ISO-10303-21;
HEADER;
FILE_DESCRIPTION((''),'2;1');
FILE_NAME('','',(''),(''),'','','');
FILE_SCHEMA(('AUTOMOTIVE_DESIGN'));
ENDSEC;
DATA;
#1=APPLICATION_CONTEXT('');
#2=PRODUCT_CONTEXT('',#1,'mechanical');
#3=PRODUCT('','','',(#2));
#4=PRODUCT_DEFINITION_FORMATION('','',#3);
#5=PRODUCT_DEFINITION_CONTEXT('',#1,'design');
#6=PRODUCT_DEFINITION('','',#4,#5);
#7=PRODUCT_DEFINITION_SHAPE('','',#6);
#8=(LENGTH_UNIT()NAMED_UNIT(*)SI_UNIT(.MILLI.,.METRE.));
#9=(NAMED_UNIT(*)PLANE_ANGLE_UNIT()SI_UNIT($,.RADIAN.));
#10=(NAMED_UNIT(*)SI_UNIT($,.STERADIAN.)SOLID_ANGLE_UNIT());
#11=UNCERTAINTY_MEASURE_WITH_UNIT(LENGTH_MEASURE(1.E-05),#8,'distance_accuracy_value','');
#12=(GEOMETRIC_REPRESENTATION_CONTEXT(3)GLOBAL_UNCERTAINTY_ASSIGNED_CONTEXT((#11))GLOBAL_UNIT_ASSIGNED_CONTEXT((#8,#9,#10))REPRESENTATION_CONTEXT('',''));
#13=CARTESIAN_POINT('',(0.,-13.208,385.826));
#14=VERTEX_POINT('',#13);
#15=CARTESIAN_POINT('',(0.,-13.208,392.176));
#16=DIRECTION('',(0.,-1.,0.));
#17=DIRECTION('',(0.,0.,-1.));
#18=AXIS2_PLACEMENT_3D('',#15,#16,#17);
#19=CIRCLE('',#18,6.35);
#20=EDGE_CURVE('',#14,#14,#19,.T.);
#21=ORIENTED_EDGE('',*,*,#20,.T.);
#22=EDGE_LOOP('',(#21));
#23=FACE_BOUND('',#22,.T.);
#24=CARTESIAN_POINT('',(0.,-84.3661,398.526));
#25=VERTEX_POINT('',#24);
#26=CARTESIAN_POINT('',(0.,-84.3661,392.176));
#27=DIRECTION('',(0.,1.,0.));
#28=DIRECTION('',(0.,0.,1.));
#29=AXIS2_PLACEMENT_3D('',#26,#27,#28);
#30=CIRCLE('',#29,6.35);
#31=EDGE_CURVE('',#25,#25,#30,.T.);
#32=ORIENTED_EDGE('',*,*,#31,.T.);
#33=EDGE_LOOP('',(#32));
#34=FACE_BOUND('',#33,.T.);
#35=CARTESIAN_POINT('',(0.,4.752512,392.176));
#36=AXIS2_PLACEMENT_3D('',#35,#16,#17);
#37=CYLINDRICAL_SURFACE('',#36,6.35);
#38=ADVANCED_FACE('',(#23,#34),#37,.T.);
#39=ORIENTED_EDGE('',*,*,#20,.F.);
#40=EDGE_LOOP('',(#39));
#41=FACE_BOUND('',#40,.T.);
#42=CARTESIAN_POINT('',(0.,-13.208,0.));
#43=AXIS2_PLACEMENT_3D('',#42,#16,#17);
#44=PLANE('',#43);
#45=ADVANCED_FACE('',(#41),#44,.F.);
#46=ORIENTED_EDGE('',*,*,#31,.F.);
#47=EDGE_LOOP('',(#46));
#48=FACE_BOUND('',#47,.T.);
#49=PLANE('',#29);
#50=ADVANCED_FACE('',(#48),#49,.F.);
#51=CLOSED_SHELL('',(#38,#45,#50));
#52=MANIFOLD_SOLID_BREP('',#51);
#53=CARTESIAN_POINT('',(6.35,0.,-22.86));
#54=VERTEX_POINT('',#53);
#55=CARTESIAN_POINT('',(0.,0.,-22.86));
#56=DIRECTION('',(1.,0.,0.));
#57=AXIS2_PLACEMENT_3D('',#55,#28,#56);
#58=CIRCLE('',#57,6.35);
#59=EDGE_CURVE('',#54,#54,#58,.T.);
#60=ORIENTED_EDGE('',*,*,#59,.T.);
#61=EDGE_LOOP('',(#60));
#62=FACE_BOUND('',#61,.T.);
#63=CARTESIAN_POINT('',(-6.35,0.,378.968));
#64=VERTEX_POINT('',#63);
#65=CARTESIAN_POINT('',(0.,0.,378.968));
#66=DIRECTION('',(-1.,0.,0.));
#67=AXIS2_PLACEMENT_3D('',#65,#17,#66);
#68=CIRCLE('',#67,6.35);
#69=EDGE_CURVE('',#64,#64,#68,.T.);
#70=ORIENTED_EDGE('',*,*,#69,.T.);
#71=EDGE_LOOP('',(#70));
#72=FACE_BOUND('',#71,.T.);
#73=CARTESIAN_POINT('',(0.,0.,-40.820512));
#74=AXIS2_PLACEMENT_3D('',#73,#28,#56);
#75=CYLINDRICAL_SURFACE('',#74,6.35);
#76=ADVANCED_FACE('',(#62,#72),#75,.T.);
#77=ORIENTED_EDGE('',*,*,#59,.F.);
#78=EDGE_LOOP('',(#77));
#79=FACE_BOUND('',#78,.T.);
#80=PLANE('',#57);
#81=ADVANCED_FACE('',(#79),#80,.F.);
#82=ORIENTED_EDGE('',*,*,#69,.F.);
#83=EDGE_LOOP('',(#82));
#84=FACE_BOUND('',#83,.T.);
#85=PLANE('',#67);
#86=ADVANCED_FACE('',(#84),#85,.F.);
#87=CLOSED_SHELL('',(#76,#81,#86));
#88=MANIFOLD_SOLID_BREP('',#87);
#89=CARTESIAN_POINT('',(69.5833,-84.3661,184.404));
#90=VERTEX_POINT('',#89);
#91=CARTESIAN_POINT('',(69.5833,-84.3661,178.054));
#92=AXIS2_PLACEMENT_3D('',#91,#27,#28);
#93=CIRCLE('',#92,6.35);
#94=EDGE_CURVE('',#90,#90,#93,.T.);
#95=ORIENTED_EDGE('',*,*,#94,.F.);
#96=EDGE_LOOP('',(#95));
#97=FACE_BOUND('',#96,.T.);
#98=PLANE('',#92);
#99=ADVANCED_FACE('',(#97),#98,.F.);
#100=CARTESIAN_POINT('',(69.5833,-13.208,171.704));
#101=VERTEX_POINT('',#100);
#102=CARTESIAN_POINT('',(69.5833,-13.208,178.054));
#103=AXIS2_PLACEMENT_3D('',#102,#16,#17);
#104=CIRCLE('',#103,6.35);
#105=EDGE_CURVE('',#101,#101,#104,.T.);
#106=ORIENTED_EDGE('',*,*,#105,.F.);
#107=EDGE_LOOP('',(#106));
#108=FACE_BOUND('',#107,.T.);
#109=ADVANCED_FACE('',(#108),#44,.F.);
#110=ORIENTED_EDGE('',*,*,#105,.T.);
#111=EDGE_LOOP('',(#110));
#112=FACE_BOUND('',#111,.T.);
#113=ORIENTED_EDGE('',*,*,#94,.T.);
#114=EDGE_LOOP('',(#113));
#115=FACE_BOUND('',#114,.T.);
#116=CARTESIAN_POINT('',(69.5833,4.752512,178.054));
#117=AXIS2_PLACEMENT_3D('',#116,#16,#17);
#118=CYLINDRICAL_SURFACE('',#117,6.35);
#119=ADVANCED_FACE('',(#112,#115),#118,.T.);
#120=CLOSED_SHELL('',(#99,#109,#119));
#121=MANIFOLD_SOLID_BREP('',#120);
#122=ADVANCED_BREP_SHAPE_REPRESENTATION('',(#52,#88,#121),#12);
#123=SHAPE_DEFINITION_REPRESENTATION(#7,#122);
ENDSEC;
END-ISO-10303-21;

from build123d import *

# Parameters (mm, degrees)
BOSS_EXTRUDE1_OUTLINE_R = 6.35
BOSS_EXTRUDE1_DEPTH     = 71.1581
SKETCH3_R               = 6.35
BOSS_EXTRUDE2_DEPTH     = 401.828


# Read off the part's stored shape, not the designer's step: Boss-Extrude1
with BuildPart() as part:
    # Boss-Extrude1 outline → Boss-Extrude1 (new body)
    with BuildSketch(Plane(origin=(0, -84.3661, 0), x_dir=(1, 0, 0), z_dir=(0, 1, 0))):
        with Locations((0, -392.176)):
            Circle(BOSS_EXTRUDE1_OUTLINE_R)
        with Locations((69.5833, -178.054)):
            Circle(BOSS_EXTRUDE1_OUTLINE_R)
    extrude(amount=BOSS_EXTRUDE1_DEPTH)


with BuildPart() as body_2:
    # Sketch3 → Boss-Extrude2 (new body)
    with BuildSketch(Plane(origin=(0, 0, 378.968), x_dir=(-1, 0, 0), z_dir=(0, 0, -1))):
        with Locations(Location((0, 0, 0), (0, 0, 180))):
            Circle(SKETCH3_R)
    extrude(amount=BOSS_EXTRUDE2_DEPTH)


solid = Compound([part.part, body_2.part])
